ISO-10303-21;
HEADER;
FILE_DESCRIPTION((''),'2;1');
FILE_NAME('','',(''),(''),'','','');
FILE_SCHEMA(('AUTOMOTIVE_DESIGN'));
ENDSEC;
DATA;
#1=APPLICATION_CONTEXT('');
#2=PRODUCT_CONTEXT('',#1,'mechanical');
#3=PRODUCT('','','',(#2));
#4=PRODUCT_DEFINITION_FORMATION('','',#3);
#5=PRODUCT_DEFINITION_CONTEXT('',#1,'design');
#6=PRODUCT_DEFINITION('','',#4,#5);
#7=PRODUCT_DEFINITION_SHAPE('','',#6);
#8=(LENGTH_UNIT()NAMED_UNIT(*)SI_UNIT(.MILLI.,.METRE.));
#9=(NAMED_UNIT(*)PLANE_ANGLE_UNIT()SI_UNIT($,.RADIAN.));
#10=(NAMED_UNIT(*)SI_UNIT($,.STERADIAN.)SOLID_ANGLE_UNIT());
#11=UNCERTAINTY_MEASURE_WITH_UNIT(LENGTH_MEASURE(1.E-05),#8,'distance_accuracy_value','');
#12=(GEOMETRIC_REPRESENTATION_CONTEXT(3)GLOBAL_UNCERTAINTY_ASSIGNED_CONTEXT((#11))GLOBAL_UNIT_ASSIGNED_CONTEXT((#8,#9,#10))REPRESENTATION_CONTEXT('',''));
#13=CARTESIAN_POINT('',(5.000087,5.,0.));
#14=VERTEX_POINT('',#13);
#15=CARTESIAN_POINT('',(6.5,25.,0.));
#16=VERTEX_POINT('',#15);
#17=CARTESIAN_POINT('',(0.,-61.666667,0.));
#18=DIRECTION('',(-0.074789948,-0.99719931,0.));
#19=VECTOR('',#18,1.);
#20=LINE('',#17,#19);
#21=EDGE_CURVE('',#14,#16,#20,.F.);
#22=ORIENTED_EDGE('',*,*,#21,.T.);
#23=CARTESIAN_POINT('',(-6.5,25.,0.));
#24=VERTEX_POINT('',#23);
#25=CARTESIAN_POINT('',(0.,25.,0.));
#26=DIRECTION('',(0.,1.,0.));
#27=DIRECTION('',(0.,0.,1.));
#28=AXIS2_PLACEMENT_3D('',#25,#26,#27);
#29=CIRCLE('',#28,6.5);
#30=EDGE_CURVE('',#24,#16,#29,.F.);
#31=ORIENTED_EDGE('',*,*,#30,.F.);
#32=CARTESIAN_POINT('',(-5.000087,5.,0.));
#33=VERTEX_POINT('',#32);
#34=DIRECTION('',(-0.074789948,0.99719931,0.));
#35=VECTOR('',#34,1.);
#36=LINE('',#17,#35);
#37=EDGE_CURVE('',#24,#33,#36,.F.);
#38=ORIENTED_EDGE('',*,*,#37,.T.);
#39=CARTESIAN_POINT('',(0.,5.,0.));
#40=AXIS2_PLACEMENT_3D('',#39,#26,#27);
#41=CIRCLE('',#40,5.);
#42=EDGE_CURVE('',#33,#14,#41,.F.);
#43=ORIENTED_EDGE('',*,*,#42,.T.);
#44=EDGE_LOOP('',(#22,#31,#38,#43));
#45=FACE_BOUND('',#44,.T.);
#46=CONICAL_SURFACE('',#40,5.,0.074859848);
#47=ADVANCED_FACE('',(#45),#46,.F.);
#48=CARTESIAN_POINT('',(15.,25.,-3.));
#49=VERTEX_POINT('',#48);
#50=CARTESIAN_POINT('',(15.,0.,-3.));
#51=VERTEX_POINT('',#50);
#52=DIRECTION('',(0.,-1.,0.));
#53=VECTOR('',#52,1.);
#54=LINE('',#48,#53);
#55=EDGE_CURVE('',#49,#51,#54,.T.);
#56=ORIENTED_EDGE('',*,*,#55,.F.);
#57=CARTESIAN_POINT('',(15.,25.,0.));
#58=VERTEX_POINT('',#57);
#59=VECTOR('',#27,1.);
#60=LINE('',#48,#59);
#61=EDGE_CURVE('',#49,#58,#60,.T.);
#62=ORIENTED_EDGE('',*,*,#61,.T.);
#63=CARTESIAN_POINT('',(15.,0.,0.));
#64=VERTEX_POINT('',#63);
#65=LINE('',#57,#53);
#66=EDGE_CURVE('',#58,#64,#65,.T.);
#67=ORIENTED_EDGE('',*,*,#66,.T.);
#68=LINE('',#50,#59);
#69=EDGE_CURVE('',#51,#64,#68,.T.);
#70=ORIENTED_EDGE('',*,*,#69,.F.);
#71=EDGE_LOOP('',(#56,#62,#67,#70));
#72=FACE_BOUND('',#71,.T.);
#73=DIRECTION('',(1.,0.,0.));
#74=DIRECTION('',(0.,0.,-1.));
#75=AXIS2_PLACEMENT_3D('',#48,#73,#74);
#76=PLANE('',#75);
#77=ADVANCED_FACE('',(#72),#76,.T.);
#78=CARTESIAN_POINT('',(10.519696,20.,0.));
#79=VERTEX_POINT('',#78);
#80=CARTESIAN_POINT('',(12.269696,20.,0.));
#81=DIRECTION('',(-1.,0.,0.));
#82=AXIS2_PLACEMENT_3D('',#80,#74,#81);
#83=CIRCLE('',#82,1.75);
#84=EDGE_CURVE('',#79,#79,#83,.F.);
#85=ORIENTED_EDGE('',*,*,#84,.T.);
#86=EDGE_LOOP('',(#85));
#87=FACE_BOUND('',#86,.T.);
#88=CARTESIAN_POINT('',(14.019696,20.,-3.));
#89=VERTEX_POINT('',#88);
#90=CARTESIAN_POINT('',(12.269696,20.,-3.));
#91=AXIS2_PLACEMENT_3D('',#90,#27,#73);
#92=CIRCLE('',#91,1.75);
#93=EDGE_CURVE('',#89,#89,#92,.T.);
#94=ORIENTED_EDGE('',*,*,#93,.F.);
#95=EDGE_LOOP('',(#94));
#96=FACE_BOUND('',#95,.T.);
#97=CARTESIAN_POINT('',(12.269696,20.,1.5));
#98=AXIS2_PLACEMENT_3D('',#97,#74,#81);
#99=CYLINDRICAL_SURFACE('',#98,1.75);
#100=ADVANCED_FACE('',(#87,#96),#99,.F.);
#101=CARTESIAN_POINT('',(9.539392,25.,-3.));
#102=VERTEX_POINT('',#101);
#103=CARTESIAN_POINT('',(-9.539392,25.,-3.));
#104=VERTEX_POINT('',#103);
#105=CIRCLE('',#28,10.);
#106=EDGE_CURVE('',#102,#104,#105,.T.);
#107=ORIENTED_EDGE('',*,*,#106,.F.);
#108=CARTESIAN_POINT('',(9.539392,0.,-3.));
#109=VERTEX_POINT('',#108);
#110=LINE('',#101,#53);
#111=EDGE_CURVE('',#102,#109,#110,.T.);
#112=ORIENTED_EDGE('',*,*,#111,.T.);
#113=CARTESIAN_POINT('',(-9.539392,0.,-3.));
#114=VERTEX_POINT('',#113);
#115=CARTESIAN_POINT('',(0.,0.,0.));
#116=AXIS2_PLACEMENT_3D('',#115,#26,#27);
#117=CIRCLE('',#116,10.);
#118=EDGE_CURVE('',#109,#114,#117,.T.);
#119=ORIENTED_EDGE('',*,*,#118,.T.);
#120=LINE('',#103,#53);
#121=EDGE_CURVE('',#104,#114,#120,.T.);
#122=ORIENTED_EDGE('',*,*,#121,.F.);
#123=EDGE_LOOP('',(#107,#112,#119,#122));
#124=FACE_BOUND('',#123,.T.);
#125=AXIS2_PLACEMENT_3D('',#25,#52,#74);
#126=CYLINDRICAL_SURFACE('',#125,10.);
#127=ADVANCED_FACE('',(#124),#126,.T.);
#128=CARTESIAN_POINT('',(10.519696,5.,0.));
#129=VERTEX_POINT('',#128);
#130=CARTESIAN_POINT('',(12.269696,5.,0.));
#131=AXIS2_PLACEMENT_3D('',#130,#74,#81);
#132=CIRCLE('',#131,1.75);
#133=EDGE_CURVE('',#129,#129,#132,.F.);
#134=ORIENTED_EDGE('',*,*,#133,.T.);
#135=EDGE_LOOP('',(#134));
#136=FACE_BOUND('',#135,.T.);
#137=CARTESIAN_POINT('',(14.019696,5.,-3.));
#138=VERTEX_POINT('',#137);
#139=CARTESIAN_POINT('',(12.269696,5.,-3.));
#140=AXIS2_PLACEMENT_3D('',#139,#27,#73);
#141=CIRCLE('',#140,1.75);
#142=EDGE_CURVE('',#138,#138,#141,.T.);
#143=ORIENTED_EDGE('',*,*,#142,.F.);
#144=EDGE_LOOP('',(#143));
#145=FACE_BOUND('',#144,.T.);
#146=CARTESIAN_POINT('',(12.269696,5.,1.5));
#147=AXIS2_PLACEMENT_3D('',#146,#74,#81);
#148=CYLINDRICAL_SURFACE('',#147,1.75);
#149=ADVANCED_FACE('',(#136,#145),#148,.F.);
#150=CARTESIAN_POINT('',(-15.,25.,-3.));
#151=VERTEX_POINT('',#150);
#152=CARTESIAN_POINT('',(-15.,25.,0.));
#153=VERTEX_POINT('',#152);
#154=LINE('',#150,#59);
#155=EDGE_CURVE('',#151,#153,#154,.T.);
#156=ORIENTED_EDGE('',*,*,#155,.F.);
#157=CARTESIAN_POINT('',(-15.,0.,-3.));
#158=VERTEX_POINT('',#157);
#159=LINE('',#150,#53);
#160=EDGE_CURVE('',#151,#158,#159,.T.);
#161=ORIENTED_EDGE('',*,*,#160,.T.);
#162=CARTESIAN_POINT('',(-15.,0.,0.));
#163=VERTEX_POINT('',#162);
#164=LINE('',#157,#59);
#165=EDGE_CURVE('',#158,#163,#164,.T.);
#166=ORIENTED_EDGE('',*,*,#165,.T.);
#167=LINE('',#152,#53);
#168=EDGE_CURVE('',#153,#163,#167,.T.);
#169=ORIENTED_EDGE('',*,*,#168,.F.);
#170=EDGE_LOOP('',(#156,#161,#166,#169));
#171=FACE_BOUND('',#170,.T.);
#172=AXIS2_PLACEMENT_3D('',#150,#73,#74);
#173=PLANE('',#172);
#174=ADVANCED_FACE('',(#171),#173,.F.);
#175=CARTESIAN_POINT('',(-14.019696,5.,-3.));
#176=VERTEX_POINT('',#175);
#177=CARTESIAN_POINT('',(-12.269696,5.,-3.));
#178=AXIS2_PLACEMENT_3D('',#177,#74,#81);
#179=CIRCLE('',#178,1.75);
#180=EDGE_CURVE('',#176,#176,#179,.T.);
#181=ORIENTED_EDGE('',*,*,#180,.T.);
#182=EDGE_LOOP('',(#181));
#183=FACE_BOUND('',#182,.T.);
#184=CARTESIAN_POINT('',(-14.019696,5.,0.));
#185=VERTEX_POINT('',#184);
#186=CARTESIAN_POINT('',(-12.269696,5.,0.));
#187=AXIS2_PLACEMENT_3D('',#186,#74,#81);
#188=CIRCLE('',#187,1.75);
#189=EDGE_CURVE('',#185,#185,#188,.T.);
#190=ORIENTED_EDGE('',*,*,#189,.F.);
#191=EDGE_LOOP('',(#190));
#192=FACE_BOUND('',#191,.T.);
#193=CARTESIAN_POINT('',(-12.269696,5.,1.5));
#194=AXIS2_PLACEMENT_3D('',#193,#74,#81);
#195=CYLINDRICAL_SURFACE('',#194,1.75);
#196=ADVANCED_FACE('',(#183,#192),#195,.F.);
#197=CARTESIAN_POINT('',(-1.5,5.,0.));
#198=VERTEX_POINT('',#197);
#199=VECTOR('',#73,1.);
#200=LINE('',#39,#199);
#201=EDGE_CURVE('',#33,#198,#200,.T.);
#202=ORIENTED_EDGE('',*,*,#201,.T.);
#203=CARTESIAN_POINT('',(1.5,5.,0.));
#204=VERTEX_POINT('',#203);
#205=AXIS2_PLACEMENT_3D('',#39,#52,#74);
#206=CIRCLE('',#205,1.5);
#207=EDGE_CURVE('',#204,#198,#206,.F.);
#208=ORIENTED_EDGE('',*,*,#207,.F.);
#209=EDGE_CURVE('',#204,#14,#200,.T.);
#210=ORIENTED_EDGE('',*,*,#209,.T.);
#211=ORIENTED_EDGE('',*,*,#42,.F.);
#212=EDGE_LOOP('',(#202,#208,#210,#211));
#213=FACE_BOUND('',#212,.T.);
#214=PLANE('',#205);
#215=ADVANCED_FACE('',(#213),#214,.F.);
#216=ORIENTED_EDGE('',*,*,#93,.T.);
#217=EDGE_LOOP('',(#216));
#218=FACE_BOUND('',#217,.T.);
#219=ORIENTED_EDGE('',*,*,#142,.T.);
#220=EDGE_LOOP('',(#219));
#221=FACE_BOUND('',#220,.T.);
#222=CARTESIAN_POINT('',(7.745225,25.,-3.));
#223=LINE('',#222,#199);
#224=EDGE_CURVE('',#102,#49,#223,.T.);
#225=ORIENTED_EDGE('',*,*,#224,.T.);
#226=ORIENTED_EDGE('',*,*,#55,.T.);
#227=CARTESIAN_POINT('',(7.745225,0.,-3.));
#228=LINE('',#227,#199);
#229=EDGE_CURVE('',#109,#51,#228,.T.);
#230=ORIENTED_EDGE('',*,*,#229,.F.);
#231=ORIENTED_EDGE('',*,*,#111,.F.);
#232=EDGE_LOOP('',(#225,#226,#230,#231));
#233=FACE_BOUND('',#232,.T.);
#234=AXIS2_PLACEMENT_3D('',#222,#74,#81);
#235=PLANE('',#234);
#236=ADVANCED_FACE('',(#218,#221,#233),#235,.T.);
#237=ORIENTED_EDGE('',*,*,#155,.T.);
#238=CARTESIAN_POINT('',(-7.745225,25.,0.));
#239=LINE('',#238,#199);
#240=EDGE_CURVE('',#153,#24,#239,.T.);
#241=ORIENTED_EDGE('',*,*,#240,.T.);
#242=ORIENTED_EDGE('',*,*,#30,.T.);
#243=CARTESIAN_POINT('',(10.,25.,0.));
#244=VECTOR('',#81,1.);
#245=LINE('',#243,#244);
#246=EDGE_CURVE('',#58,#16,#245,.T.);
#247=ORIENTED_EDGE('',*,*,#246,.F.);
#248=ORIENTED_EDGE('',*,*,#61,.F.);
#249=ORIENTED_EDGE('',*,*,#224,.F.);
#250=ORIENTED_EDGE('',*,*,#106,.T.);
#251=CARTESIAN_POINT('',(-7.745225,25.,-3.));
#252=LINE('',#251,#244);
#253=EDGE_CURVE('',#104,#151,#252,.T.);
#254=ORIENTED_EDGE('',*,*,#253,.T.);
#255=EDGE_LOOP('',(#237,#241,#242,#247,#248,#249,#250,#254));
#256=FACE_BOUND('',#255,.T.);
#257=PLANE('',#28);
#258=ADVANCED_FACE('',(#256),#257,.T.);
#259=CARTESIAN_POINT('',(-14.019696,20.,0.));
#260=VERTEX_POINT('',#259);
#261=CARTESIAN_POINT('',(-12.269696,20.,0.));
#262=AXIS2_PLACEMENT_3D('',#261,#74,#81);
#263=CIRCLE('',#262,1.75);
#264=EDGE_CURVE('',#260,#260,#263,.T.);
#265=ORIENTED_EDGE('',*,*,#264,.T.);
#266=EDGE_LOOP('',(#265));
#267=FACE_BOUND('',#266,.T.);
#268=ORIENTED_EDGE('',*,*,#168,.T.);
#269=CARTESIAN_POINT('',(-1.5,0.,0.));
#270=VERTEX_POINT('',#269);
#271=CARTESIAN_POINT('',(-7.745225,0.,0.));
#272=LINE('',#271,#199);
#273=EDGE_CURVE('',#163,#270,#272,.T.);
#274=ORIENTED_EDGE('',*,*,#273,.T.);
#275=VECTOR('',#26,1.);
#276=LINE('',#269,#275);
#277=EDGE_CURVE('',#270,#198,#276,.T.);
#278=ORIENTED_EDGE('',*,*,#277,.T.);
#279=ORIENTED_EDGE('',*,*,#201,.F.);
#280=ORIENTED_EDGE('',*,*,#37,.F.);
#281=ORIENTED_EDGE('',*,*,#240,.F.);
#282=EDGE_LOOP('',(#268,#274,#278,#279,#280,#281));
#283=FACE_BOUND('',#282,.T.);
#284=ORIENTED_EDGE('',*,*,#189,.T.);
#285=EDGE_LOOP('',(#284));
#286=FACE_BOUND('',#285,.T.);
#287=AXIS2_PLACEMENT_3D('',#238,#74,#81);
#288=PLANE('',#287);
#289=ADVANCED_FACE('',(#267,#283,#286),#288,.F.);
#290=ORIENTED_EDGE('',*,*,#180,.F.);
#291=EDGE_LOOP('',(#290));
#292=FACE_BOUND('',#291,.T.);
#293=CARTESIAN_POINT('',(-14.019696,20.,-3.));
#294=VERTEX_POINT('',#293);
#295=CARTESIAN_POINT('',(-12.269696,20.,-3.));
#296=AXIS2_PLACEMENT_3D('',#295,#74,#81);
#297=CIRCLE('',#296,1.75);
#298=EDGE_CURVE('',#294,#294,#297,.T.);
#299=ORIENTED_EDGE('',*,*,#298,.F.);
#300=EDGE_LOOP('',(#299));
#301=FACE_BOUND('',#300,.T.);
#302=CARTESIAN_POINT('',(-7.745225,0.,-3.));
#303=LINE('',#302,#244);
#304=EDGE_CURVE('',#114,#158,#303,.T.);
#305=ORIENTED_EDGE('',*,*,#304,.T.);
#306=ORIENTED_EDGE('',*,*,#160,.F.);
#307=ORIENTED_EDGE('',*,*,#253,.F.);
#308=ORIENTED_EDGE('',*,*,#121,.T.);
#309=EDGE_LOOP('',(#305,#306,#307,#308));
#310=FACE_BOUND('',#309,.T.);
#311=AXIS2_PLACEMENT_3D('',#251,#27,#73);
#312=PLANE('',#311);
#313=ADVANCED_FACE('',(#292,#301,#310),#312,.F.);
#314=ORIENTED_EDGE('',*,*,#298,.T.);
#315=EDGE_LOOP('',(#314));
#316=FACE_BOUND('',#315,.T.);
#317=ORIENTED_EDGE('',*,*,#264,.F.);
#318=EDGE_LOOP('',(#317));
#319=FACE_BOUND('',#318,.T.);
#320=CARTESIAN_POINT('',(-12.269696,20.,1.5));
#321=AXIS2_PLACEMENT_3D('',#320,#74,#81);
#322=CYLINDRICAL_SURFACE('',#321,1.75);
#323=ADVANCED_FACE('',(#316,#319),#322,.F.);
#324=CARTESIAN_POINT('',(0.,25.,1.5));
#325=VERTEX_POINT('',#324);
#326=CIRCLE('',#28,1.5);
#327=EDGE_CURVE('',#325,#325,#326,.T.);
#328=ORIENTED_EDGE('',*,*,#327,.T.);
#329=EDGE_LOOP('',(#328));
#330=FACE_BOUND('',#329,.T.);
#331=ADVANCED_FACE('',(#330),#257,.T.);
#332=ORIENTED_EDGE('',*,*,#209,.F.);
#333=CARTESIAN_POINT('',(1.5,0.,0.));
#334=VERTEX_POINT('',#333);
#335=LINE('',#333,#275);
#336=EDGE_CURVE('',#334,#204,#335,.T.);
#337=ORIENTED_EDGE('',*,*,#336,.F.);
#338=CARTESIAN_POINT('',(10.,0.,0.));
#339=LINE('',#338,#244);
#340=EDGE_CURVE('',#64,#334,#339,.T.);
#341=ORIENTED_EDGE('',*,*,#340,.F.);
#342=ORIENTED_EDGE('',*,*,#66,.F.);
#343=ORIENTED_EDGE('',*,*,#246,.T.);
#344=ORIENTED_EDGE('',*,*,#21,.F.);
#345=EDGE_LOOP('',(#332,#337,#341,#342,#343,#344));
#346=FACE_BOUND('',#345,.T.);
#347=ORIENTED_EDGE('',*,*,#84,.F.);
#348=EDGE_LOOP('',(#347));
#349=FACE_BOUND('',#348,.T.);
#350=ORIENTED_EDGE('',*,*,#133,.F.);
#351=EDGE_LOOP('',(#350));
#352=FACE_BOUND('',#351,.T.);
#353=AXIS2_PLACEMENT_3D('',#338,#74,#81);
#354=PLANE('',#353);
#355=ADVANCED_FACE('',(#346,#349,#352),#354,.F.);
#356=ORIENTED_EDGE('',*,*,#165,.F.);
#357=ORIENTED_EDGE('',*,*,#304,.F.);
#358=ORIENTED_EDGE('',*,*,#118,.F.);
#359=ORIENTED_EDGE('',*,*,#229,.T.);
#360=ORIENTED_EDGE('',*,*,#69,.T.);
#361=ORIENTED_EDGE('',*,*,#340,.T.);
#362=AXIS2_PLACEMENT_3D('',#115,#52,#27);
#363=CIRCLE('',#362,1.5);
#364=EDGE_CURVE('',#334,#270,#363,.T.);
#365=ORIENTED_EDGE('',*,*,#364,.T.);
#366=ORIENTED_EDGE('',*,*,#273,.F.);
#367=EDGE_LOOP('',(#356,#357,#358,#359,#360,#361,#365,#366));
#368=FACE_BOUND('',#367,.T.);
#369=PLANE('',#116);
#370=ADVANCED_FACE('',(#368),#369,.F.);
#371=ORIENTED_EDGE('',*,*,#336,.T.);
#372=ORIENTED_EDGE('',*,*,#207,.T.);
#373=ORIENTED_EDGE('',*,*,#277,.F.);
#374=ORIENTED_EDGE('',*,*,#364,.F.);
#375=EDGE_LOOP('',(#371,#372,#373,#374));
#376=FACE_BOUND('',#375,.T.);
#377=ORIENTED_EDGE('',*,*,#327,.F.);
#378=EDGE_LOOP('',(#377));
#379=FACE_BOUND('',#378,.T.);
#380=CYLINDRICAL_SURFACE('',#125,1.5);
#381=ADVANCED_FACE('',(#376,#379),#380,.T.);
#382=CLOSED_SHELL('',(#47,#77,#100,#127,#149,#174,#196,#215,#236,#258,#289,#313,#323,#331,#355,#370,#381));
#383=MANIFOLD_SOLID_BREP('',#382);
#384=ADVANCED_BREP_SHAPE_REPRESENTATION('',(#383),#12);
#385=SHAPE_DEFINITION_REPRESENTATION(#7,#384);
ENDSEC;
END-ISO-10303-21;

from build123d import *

# Parameters (mm, degrees)
SKETCH1_R           = 10
BOSS_EXTRUDE1_DEPTH = 25
SKETCH4_R           = 1.5
BOSS_EXTRUDE2_DEPTH = 20
SKETCH6_W           = 7.254775406
SKETCH6_H           = 3
BOSS_EXTRUDE3_DEPTH = 25
CUT_EXTRUDE1_DEPTH  = 31.822070015
SKETCH7_R           = 1.75
CUT_EXTRUDE2_DEPTH  = 30.983328701


# Read off the part's stored shape, not the designer's step: Boundary-Cut1
with BuildPart() as part:
    # Sketch1 → Boss-Extrude1 (new body)
    with BuildSketch(Plane(origin=(0, 0, 0), x_dir=(1, 0, 0), z_dir=(0, 1, 0))):
        with Locations(Location((0, 0, 0), (0, 0, 270))):
            Circle(SKETCH1_R)
    extrude(amount=BOSS_EXTRUDE1_DEPTH)

    # Boundary-Cut1 outline → Boundary-Cut1 (revolve, cut)
    with BuildSketch(Plane.XY):
        Polygon((0, 5), (5, 5), (6.5, 25), (0, 25), align=None)
    revolve(axis=Axis((0, 0, 0), (0, 1, 0)), mode=Mode.SUBTRACT)

    # Sketch4 → Boss-Extrude2 (add)
    with BuildSketch(Plane(origin=(0, 5, 0), x_dir=(1, 0, 0), z_dir=(0, 1, 0))):
        with Locations(Location((0, 0, 0), (0, 0, 90))):
            Circle(SKETCH4_R)
    extrude(amount=BOSS_EXTRUDE2_DEPTH)

    # Sketch6 → Boss-Extrude3 (add)
    with BuildSketch(Plane(origin=(0, 0, 0), x_dir=(1, 0, 0), z_dir=(0, 1, 0))):
        with Locations((-11.372612297, 1.5)):
            Rectangle(SKETCH6_W, SKETCH6_H)
    boss_extrude3 = extrude(amount=BOSS_EXTRUDE3_DEPTH)

    # Sketch5 → Cut-Extrude1 (cut, through all)
    with BuildSketch(Plane(origin=(0, 25, 0), x_dir=(1, 0, 0), z_dir=(0, 1, 0))):
        with BuildLine():
            Line((-1.5, 0), (-10, 0))
            ThreePointArc((-10, 0), (0, -10), (10, 0))
            Line((10, 0), (1.5, 0))
            ThreePointArc((1.5, 0), (0, -1.5), (-1.5, 0))
        make_face()
    extrude(amount=-CUT_EXTRUDE1_DEPTH, mode=Mode.SUBTRACT)

    # Sketch7 → Cut-Extrude2 (cut, through all)
    with BuildSketch(Plane(origin=(0, 0, -3), x_dir=(-1, 0, 0), z_dir=(0, 0, -1))):
        with Locations((12.269696007, 5)):
            Circle(SKETCH7_R)
        with Locations((12.269696007, 20)):
            Circle(SKETCH7_R)
    cut_extrude2 = extrude(amount=-CUT_EXTRUDE2_DEPTH, mode=Mode.SUBTRACT)

    # Mirror1: Boss-Extrude3, Cut-Extrude2 across plane
    add(boss_extrude3.mirror(Plane(origin=(0, 0, 0), x_dir=(0, 0, 1), z_dir=(1, 0, 0))))
    add(cut_extrude2.mirror(Plane(origin=(0, 0, 0), x_dir=(0, 0, 1), z_dir=(1, 0, 0))), mode=Mode.SUBTRACT)


solid = part.part
